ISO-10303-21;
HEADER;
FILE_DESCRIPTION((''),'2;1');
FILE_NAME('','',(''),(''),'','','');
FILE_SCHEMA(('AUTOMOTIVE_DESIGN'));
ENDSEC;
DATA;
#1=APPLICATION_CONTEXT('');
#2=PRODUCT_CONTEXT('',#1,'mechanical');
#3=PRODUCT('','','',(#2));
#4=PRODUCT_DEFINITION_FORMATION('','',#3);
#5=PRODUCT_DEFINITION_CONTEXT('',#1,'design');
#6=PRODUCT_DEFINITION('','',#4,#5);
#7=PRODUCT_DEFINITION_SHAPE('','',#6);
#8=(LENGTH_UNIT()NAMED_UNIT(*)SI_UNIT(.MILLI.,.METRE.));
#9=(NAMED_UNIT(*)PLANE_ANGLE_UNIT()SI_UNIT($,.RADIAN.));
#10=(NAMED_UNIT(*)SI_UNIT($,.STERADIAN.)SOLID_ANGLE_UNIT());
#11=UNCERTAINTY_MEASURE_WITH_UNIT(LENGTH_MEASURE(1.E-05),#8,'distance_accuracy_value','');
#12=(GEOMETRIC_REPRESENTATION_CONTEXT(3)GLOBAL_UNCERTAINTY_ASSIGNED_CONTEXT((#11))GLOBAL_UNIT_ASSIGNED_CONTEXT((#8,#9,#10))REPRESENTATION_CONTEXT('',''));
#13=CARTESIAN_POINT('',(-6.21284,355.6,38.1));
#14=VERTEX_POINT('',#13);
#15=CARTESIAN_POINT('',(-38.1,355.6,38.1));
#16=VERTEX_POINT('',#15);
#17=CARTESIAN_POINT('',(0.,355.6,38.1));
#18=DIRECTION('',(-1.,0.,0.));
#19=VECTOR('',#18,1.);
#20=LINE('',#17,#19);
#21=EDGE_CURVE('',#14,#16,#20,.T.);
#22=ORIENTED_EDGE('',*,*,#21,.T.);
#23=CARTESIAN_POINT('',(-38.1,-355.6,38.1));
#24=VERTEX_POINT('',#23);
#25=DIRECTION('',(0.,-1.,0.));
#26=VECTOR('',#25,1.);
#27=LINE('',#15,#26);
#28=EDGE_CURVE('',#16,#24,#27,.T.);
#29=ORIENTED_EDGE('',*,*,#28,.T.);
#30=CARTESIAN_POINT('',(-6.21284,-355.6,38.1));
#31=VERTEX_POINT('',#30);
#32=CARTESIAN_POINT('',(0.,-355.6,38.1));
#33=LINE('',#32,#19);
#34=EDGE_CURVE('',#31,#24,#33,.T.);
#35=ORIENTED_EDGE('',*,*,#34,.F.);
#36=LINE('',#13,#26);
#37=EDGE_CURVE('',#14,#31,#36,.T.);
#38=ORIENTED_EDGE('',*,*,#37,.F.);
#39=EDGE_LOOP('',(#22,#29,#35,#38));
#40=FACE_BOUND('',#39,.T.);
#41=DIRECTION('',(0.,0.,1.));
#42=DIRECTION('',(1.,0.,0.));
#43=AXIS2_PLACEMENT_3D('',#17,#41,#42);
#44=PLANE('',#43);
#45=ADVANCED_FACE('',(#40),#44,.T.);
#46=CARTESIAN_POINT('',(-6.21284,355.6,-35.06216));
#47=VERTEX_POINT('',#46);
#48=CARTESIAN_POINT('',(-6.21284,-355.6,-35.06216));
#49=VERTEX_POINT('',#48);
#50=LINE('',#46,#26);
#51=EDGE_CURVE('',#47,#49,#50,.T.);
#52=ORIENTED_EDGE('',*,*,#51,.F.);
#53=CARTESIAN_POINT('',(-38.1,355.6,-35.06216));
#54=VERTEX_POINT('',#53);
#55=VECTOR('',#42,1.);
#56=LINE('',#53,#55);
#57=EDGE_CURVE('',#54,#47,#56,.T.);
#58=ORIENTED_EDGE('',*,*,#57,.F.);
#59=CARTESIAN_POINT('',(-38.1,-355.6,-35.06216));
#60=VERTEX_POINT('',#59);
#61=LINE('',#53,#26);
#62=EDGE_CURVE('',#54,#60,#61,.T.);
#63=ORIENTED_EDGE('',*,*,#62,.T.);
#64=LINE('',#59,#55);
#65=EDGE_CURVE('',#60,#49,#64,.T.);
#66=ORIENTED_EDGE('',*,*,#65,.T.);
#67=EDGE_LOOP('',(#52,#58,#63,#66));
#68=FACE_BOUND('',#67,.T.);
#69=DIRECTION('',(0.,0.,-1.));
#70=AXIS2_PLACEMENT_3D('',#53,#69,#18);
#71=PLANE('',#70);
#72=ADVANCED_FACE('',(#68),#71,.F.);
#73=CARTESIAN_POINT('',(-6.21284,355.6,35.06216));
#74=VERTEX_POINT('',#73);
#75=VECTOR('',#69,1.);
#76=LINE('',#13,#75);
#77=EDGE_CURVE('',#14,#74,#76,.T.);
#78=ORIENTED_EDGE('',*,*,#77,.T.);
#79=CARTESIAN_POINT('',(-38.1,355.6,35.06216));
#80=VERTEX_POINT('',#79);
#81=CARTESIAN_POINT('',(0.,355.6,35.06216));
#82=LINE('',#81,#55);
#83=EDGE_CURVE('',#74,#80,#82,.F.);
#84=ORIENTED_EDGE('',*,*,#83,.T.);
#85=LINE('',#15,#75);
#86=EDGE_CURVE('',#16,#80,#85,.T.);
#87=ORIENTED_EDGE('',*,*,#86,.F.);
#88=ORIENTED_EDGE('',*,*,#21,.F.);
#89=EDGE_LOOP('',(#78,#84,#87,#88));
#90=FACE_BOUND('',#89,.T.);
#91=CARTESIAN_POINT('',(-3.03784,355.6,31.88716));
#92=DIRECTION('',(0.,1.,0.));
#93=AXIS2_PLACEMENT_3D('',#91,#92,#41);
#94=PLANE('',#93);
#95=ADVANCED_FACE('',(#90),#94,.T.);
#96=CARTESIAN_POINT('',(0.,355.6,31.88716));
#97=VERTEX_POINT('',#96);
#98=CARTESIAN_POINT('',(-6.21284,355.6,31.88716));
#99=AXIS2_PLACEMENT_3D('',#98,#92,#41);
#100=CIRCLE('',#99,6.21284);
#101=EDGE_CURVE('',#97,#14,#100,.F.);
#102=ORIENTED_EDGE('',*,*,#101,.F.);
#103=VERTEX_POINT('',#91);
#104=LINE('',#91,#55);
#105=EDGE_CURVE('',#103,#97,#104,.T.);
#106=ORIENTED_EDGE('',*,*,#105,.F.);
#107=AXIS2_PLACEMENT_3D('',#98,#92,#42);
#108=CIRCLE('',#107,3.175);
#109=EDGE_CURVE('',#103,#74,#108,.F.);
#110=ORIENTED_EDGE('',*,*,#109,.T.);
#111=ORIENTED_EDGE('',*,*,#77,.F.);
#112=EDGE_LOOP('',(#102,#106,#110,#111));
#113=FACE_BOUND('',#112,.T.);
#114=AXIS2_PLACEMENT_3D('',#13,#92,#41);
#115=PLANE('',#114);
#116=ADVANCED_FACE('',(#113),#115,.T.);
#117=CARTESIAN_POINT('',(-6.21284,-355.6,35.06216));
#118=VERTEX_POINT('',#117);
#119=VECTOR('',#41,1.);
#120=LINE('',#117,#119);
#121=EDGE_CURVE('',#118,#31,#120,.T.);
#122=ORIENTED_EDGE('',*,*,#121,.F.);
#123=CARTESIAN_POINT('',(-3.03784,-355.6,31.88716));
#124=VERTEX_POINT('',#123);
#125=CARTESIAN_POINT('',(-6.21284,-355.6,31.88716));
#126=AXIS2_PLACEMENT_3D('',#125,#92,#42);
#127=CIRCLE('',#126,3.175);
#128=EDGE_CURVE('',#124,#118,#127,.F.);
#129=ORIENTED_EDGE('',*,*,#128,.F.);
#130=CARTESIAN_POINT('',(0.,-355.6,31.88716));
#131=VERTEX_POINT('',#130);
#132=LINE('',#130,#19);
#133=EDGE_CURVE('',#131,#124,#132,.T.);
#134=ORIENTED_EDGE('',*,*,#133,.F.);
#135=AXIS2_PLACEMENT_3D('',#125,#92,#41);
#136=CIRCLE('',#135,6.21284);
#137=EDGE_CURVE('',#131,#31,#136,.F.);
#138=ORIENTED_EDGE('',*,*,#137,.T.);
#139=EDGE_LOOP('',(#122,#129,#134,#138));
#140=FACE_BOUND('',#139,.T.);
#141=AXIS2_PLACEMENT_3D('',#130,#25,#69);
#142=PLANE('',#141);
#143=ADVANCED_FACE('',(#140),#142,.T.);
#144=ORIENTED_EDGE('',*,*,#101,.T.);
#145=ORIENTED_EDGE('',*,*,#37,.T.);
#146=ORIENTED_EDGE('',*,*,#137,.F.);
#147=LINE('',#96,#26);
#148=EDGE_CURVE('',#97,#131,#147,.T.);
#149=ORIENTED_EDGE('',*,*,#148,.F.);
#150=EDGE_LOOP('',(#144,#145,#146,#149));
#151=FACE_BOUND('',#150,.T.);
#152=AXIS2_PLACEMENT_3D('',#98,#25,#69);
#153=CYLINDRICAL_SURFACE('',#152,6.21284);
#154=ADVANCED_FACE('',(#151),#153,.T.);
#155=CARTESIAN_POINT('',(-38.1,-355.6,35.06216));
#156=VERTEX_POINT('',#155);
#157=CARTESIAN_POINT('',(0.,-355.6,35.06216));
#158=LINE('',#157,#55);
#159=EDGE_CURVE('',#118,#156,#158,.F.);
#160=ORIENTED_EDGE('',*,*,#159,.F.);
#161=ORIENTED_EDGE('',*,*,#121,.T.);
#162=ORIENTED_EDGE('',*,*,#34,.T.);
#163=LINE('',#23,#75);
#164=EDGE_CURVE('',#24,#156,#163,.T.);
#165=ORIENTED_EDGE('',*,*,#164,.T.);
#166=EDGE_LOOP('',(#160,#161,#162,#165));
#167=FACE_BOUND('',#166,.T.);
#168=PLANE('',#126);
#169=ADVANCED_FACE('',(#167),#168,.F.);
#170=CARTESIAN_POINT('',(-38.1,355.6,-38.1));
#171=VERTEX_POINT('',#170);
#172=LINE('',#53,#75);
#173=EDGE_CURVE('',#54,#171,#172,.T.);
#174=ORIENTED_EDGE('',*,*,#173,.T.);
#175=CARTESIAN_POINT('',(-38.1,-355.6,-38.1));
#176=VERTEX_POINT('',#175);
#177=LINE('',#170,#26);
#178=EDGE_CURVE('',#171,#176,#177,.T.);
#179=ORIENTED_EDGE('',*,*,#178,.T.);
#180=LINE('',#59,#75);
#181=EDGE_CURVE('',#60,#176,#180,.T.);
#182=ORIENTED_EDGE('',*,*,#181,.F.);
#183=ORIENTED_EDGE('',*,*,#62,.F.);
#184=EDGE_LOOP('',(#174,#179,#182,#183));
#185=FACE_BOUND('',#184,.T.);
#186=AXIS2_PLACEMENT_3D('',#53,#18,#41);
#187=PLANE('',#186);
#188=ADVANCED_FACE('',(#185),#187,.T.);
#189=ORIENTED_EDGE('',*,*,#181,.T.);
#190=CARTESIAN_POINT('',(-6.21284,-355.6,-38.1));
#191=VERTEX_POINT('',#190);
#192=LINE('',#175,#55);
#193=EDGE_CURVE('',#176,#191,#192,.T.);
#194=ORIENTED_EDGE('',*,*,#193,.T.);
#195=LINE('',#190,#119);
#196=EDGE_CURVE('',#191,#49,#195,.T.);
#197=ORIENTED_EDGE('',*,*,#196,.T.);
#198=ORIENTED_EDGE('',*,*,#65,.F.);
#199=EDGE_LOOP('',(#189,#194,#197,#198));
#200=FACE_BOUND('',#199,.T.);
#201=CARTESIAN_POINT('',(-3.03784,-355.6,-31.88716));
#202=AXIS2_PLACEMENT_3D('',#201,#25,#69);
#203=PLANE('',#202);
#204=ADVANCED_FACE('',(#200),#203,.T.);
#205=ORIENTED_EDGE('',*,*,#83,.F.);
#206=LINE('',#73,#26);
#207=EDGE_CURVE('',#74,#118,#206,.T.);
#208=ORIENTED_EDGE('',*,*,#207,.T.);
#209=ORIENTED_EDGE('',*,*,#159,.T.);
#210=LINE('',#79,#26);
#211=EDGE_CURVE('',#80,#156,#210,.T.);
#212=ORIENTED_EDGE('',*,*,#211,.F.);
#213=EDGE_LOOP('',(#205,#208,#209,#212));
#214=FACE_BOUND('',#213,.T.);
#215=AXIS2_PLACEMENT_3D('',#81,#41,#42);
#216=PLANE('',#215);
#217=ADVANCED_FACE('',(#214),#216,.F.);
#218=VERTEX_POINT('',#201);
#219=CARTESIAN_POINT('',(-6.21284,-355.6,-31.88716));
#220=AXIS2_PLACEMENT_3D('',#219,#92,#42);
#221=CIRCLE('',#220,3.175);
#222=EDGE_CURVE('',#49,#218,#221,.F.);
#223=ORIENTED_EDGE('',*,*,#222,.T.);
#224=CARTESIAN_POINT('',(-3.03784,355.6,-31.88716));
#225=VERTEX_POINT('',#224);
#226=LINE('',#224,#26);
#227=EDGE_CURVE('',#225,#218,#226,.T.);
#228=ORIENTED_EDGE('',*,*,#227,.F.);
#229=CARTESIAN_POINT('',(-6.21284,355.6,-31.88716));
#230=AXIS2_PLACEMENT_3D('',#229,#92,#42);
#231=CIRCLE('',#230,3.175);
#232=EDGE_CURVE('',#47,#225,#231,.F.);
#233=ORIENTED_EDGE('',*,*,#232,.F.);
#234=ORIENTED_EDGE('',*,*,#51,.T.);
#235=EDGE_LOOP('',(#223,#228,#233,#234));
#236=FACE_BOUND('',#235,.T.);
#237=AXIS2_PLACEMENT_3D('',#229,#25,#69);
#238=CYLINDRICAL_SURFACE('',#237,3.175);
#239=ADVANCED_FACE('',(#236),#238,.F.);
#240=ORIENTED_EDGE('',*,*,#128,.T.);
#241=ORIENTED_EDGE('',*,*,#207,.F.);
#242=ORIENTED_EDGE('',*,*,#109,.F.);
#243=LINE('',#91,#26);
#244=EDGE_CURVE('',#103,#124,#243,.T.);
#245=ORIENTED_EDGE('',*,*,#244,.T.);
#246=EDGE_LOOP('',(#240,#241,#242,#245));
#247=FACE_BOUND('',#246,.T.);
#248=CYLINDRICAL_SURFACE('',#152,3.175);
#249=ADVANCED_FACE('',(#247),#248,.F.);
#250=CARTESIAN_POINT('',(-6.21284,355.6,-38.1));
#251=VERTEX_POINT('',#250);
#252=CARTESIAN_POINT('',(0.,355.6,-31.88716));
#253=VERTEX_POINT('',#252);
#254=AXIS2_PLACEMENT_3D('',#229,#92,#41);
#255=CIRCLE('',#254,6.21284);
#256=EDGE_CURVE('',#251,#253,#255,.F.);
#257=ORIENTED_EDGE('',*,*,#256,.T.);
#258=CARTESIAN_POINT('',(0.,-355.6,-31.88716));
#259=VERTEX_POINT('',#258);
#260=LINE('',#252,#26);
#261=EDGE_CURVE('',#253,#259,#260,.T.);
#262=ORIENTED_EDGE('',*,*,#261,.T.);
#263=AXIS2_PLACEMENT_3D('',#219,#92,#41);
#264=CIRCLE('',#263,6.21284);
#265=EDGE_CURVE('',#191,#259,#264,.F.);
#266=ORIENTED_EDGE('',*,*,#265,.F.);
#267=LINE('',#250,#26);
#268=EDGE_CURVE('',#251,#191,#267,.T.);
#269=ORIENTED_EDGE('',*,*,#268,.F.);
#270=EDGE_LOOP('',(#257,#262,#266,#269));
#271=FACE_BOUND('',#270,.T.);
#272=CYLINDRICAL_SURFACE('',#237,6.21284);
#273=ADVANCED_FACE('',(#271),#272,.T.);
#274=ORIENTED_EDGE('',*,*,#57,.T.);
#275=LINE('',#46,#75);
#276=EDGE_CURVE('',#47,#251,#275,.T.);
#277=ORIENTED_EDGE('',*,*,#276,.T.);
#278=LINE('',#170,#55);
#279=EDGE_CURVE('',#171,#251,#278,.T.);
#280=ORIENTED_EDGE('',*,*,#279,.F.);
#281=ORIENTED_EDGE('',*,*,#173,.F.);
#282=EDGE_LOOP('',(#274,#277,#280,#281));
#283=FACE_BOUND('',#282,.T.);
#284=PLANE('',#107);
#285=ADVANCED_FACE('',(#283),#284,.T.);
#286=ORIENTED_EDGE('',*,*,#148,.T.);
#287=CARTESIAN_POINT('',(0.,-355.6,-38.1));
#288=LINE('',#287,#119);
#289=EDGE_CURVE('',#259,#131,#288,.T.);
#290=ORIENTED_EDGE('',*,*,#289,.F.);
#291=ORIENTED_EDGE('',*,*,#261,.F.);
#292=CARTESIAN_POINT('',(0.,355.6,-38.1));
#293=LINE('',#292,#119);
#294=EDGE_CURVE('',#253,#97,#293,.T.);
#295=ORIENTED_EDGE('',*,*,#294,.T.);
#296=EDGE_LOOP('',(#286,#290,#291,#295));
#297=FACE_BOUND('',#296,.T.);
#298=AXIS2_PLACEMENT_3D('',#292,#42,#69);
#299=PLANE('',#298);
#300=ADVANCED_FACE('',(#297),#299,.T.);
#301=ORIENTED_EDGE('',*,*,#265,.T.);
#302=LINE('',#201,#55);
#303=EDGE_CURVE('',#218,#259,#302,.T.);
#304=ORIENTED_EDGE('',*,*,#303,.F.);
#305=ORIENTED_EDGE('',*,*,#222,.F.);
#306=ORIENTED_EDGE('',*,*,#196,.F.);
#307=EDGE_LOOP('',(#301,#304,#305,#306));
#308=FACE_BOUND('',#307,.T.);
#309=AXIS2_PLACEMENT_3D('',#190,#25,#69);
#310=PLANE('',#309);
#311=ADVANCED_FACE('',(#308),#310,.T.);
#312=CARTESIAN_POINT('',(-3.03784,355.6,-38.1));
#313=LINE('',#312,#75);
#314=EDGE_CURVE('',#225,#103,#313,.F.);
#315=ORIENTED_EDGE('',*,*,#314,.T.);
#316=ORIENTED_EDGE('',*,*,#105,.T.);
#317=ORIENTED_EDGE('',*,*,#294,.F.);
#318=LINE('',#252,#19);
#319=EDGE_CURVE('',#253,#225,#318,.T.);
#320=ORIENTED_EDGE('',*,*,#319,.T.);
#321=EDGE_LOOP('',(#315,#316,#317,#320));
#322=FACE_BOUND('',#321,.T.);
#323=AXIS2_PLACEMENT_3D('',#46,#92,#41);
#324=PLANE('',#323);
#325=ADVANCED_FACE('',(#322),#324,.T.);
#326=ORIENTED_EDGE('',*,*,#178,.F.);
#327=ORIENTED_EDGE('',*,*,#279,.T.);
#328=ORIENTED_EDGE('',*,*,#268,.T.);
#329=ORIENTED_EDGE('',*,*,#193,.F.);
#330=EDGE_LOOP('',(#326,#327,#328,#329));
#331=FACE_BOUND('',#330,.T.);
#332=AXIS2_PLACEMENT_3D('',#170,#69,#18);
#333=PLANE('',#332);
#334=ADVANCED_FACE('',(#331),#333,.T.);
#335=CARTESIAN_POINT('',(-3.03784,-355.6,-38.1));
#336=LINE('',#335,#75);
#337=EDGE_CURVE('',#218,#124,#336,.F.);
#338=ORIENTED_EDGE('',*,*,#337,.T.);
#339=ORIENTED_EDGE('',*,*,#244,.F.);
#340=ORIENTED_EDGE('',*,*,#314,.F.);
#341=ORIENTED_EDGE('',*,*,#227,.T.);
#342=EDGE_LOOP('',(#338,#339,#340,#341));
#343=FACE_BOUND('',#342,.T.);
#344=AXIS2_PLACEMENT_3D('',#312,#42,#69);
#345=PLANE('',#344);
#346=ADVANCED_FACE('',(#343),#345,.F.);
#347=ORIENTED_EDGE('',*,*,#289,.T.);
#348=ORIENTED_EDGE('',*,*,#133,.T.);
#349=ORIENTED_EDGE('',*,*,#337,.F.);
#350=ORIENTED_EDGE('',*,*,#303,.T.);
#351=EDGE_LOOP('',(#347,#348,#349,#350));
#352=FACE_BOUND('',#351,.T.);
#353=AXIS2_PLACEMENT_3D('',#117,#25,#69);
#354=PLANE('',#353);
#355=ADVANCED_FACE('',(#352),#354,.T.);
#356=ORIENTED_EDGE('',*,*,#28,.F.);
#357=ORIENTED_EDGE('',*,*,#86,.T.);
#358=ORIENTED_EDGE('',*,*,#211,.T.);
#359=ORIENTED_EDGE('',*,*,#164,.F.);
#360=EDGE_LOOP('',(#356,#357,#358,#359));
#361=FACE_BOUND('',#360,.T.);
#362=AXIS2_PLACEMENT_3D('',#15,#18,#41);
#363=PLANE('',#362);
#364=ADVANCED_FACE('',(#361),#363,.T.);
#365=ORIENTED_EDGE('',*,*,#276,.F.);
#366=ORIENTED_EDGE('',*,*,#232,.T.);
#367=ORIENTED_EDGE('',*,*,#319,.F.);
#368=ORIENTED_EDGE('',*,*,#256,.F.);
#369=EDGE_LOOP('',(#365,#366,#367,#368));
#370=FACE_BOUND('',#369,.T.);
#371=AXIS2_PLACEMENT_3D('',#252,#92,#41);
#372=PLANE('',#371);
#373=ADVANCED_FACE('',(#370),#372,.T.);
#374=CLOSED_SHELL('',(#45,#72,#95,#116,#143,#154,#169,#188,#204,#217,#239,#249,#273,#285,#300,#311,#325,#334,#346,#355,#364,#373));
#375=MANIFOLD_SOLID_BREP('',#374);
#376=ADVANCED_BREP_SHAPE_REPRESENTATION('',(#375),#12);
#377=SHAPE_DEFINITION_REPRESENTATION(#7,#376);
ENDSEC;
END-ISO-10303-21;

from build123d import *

# Parameters (mm, degrees)
BASE_FLANGE1_DEPTH = 355.6


# Sheet-metal steps are written as plain solids
with BuildPart() as part:
    # Sketch1 → Base-Flange1 (new, symmetric)
    with BuildSketch(Plane(origin=(0, 0, 0), x_dir=(1, 0, 0), z_dir=(0, 1, 0))):
        with BuildLine():
            Line((-38.1, 38.1), (-6.21284, 38.1))
            ThreePointArc((-6.21284, 38.1), (-1.819698706, 36.280301294), (0, 31.88716))
            Line((0, 31.88716), (0, -31.88716))
            ThreePointArc((0, -31.88716), (-1.819698706, -36.280301294), (-6.21284, -38.1))
            Line((-6.21284, -38.1), (-38.1, -38.1))
            Line((-38.1, -38.1), (-38.1, -35.06216))
            Line((-38.1, -35.06216), (-6.21284, -35.06216))
            ThreePointArc((-6.21284, -35.06216), (-3.96777597, -34.13222403), (-3.03784, -31.88716))
            Line((-3.03784, -31.88716), (-3.03784, 31.88716))
            ThreePointArc((-3.03784, 31.88716), (-3.96777597, 34.13222403), (-6.21284, 35.06216))
            Line((-6.21284, 35.06216), (-38.1, 35.06216))
            Line((-38.1, 35.06216), (-38.1, 38.1))
        make_face()
    extrude(amount=BASE_FLANGE1_DEPTH, both=True)


solid = part.part
